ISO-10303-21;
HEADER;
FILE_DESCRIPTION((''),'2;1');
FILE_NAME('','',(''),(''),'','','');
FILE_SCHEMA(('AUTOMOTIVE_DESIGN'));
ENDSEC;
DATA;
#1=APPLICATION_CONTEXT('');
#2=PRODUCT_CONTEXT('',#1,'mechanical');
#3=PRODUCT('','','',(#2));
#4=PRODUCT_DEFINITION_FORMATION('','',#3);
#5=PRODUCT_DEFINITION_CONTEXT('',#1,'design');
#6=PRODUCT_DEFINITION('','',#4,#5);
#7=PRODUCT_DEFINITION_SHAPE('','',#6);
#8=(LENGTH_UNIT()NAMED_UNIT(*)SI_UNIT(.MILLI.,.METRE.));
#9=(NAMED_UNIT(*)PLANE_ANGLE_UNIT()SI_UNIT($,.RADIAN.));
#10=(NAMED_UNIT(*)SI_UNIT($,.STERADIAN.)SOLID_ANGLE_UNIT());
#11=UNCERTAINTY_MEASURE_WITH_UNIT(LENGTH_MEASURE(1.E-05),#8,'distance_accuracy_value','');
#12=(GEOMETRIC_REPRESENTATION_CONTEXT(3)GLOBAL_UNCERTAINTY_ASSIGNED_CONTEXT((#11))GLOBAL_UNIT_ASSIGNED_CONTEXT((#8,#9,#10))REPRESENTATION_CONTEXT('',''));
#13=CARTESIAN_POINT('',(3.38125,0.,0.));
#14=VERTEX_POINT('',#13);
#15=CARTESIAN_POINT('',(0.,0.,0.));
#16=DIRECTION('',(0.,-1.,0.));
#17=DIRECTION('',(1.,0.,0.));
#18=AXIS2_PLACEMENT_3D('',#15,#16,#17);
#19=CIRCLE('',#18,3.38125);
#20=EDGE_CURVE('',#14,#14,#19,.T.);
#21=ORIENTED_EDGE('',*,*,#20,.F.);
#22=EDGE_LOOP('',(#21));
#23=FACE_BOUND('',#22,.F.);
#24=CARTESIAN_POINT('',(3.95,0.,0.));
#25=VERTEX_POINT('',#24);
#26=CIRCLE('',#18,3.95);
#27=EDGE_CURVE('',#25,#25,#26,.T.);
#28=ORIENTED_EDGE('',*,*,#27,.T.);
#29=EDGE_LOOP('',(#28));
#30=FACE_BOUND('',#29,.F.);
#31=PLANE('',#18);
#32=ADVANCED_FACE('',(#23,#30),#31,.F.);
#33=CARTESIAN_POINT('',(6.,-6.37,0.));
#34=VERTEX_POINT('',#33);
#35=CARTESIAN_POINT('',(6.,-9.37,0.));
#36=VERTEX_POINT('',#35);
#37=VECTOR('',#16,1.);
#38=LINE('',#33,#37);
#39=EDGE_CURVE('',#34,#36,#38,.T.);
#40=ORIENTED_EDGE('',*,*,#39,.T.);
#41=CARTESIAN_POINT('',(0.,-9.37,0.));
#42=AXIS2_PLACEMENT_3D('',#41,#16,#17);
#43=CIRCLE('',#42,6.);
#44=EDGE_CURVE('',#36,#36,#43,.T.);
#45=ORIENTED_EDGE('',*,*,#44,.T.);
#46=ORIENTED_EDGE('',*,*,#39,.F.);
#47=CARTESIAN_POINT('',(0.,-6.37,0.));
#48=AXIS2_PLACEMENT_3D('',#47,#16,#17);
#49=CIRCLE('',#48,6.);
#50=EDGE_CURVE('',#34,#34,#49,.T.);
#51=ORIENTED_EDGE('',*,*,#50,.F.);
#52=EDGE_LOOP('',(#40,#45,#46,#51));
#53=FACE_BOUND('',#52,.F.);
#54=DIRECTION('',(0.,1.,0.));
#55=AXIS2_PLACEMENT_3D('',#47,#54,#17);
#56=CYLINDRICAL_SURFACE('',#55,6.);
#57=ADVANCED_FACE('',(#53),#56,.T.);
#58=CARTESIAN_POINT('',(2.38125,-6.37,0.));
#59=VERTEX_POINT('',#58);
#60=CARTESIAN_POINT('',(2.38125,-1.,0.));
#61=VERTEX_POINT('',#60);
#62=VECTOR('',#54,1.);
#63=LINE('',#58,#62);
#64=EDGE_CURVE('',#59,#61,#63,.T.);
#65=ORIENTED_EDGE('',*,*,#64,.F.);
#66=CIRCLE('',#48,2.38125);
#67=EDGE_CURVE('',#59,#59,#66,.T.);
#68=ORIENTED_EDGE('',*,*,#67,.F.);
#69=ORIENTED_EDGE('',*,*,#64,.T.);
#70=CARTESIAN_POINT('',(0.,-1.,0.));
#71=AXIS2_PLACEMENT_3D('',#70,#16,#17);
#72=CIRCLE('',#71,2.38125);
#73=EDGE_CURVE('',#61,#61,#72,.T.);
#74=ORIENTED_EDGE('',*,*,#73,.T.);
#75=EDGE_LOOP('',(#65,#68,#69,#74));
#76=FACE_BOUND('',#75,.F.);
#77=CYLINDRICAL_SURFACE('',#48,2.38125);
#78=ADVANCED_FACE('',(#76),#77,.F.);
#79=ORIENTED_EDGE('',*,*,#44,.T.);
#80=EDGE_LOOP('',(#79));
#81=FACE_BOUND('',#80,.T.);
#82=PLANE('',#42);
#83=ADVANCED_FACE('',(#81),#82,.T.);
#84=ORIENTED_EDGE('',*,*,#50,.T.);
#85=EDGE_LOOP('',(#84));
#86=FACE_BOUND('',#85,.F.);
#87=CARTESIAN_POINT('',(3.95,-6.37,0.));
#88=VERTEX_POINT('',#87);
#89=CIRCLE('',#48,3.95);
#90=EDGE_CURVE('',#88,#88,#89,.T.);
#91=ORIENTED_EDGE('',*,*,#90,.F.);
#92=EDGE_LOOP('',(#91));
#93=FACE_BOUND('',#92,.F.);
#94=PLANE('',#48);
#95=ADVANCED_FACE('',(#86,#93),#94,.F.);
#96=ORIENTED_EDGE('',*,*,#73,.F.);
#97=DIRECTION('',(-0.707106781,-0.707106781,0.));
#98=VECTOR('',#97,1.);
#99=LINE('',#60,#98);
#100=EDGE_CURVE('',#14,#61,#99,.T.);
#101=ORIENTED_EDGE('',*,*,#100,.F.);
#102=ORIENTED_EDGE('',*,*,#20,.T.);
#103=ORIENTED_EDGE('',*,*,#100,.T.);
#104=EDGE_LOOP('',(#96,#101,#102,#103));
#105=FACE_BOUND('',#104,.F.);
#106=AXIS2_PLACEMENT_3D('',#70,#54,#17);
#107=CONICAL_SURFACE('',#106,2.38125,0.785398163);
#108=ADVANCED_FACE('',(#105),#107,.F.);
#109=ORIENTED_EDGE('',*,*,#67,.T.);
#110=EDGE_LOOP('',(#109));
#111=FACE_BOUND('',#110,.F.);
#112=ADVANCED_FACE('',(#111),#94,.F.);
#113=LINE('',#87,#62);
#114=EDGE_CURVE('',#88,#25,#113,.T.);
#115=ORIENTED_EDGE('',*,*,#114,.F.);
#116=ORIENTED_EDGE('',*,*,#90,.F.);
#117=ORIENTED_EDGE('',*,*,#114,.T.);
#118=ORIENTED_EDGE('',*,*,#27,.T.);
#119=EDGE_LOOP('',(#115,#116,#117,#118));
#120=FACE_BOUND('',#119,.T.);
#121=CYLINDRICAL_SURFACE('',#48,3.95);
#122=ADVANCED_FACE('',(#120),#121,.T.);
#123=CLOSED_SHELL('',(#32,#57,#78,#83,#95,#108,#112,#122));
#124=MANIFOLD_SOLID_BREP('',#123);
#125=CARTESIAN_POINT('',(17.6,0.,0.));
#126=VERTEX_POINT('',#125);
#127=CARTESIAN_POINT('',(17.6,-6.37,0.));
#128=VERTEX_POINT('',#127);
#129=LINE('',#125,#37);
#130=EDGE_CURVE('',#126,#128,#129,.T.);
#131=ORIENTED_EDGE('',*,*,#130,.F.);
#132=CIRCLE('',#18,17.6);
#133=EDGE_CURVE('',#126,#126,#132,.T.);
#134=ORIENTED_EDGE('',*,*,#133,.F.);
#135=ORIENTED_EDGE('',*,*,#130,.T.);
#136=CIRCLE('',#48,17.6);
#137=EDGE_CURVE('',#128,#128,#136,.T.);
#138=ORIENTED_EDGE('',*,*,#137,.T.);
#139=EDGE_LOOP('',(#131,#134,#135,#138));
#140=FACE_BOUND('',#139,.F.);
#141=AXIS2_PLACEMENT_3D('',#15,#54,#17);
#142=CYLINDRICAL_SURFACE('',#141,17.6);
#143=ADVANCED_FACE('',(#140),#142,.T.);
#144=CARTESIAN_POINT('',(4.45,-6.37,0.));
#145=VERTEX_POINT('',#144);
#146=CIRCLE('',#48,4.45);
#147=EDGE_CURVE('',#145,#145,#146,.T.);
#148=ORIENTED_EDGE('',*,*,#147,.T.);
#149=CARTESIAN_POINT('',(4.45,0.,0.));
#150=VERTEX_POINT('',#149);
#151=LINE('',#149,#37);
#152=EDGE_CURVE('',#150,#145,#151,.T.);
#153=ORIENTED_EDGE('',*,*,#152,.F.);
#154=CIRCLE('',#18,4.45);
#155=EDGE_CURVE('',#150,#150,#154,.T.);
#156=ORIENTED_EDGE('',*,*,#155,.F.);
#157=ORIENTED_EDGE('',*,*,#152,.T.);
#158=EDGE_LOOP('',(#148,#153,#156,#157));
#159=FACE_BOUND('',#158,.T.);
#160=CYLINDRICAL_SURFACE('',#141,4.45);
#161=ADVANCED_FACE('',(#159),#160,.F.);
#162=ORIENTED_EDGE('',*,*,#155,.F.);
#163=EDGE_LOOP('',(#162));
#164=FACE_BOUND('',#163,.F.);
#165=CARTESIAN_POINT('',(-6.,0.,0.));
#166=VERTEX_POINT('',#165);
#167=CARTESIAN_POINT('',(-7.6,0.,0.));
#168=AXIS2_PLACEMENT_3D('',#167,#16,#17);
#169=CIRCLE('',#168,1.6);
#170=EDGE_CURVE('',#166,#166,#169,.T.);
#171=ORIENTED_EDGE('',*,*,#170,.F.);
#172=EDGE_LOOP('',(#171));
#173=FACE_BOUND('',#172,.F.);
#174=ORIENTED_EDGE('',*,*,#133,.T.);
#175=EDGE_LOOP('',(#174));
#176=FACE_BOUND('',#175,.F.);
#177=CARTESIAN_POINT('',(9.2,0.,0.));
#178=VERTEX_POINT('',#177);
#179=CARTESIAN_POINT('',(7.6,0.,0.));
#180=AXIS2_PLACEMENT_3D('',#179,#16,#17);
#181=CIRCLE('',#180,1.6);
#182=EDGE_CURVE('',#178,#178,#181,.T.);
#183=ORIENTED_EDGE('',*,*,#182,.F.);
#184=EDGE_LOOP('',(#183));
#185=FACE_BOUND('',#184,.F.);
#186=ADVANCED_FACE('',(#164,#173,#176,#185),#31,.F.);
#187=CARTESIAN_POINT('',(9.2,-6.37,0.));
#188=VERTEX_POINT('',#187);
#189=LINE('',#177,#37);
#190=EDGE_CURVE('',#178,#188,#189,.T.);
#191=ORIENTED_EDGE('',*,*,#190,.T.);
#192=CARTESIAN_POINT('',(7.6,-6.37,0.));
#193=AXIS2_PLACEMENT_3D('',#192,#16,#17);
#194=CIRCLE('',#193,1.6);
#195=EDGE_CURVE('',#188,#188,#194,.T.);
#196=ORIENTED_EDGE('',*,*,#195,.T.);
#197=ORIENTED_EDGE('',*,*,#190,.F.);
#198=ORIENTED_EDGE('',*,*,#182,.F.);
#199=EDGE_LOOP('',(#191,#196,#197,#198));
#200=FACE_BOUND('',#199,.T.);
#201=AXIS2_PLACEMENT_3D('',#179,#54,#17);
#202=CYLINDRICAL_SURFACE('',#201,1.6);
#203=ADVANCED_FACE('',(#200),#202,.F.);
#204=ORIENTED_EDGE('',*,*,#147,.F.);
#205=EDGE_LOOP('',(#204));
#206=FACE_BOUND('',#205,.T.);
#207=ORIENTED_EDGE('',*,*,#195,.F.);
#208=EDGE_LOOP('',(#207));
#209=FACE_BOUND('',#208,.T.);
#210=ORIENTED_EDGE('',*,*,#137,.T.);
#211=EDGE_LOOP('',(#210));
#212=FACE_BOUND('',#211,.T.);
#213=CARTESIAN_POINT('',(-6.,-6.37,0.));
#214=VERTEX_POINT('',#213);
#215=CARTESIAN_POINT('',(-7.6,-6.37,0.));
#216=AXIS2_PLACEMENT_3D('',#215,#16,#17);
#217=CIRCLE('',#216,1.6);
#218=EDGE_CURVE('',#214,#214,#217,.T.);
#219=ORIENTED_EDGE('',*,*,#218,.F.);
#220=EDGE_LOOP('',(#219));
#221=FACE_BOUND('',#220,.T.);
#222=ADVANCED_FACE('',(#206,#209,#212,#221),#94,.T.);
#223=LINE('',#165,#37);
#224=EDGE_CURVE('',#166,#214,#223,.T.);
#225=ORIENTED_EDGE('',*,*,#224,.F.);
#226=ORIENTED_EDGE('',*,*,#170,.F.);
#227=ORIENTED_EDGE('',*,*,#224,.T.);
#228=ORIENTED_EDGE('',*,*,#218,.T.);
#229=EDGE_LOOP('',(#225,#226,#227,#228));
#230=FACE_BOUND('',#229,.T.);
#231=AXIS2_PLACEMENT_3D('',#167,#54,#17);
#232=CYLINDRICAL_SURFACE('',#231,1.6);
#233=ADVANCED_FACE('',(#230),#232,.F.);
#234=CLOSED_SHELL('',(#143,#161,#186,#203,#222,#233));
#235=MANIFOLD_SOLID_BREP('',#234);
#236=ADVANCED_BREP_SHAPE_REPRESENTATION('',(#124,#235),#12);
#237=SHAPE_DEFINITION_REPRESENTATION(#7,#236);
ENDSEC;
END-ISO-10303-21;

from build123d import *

# Parameters (mm, degrees)
F0_R     = 17.6
F0_R_2   = 1.6
F0_R_3   = 4.45
F1_DEPTH = 6.37
F2_R     = 3.95
F2_R_2   = 2.38125
F3_DEPTH = 6.37
F2_R_3   = 4.45
F4_DEPTH = 3
F5_SIZE  = 1


with BuildPart() as f1:
    # F0 (on Front) → F1 (new body)
    with BuildSketch(Plane.XZ):
        Circle(F0_R)
        with Locations((-7.6, 0)):
            Circle(F0_R_2, mode=Mode.SUBTRACT)
        Circle(F0_R_3, mode=Mode.SUBTRACT)
        with Locations((7.6, 0)):
            Circle(F0_R_2, mode=Mode.SUBTRACT)
    extrude(amount=F1_DEPTH)


with BuildPart() as f3:
    # F2 (on face) → F3 (new body, through all)
    with BuildSketch(Plane.XZ.offset(6.37)):
        Circle(F2_R)
        Circle(F2_R_2, mode=Mode.SUBTRACT)
    extrude(amount=-F3_DEPTH)

    # F2 (on face) → F4 (join)
    with BuildSketch(Plane.XZ.offset(6.37)):
        with BuildLine():
            ThreePointArc((-6, 0), (0, -6), (6, 0))
            ThreePointArc((6, 0), (0, 6), (-6, 0))
        make_face()
        Circle(F2_R_3, mode=Mode.SUBTRACT)
        Circle(F2_R_3)
        Circle(F2_R, mode=Mode.SUBTRACT)
        Circle(F2_R)
        Circle(F2_R_2, mode=Mode.SUBTRACT)
        Circle(F2_R_2)
    extrude(amount=F4_DEPTH)

    # F5
    f5_edges = [f3.edges().sort_by_distance(p)[0] for p in [
        (-2.38125, 0, 0),
    ]]
    chamfer(f5_edges, length=F5_SIZE)


solid = Compound([f1.part, f3.part])
